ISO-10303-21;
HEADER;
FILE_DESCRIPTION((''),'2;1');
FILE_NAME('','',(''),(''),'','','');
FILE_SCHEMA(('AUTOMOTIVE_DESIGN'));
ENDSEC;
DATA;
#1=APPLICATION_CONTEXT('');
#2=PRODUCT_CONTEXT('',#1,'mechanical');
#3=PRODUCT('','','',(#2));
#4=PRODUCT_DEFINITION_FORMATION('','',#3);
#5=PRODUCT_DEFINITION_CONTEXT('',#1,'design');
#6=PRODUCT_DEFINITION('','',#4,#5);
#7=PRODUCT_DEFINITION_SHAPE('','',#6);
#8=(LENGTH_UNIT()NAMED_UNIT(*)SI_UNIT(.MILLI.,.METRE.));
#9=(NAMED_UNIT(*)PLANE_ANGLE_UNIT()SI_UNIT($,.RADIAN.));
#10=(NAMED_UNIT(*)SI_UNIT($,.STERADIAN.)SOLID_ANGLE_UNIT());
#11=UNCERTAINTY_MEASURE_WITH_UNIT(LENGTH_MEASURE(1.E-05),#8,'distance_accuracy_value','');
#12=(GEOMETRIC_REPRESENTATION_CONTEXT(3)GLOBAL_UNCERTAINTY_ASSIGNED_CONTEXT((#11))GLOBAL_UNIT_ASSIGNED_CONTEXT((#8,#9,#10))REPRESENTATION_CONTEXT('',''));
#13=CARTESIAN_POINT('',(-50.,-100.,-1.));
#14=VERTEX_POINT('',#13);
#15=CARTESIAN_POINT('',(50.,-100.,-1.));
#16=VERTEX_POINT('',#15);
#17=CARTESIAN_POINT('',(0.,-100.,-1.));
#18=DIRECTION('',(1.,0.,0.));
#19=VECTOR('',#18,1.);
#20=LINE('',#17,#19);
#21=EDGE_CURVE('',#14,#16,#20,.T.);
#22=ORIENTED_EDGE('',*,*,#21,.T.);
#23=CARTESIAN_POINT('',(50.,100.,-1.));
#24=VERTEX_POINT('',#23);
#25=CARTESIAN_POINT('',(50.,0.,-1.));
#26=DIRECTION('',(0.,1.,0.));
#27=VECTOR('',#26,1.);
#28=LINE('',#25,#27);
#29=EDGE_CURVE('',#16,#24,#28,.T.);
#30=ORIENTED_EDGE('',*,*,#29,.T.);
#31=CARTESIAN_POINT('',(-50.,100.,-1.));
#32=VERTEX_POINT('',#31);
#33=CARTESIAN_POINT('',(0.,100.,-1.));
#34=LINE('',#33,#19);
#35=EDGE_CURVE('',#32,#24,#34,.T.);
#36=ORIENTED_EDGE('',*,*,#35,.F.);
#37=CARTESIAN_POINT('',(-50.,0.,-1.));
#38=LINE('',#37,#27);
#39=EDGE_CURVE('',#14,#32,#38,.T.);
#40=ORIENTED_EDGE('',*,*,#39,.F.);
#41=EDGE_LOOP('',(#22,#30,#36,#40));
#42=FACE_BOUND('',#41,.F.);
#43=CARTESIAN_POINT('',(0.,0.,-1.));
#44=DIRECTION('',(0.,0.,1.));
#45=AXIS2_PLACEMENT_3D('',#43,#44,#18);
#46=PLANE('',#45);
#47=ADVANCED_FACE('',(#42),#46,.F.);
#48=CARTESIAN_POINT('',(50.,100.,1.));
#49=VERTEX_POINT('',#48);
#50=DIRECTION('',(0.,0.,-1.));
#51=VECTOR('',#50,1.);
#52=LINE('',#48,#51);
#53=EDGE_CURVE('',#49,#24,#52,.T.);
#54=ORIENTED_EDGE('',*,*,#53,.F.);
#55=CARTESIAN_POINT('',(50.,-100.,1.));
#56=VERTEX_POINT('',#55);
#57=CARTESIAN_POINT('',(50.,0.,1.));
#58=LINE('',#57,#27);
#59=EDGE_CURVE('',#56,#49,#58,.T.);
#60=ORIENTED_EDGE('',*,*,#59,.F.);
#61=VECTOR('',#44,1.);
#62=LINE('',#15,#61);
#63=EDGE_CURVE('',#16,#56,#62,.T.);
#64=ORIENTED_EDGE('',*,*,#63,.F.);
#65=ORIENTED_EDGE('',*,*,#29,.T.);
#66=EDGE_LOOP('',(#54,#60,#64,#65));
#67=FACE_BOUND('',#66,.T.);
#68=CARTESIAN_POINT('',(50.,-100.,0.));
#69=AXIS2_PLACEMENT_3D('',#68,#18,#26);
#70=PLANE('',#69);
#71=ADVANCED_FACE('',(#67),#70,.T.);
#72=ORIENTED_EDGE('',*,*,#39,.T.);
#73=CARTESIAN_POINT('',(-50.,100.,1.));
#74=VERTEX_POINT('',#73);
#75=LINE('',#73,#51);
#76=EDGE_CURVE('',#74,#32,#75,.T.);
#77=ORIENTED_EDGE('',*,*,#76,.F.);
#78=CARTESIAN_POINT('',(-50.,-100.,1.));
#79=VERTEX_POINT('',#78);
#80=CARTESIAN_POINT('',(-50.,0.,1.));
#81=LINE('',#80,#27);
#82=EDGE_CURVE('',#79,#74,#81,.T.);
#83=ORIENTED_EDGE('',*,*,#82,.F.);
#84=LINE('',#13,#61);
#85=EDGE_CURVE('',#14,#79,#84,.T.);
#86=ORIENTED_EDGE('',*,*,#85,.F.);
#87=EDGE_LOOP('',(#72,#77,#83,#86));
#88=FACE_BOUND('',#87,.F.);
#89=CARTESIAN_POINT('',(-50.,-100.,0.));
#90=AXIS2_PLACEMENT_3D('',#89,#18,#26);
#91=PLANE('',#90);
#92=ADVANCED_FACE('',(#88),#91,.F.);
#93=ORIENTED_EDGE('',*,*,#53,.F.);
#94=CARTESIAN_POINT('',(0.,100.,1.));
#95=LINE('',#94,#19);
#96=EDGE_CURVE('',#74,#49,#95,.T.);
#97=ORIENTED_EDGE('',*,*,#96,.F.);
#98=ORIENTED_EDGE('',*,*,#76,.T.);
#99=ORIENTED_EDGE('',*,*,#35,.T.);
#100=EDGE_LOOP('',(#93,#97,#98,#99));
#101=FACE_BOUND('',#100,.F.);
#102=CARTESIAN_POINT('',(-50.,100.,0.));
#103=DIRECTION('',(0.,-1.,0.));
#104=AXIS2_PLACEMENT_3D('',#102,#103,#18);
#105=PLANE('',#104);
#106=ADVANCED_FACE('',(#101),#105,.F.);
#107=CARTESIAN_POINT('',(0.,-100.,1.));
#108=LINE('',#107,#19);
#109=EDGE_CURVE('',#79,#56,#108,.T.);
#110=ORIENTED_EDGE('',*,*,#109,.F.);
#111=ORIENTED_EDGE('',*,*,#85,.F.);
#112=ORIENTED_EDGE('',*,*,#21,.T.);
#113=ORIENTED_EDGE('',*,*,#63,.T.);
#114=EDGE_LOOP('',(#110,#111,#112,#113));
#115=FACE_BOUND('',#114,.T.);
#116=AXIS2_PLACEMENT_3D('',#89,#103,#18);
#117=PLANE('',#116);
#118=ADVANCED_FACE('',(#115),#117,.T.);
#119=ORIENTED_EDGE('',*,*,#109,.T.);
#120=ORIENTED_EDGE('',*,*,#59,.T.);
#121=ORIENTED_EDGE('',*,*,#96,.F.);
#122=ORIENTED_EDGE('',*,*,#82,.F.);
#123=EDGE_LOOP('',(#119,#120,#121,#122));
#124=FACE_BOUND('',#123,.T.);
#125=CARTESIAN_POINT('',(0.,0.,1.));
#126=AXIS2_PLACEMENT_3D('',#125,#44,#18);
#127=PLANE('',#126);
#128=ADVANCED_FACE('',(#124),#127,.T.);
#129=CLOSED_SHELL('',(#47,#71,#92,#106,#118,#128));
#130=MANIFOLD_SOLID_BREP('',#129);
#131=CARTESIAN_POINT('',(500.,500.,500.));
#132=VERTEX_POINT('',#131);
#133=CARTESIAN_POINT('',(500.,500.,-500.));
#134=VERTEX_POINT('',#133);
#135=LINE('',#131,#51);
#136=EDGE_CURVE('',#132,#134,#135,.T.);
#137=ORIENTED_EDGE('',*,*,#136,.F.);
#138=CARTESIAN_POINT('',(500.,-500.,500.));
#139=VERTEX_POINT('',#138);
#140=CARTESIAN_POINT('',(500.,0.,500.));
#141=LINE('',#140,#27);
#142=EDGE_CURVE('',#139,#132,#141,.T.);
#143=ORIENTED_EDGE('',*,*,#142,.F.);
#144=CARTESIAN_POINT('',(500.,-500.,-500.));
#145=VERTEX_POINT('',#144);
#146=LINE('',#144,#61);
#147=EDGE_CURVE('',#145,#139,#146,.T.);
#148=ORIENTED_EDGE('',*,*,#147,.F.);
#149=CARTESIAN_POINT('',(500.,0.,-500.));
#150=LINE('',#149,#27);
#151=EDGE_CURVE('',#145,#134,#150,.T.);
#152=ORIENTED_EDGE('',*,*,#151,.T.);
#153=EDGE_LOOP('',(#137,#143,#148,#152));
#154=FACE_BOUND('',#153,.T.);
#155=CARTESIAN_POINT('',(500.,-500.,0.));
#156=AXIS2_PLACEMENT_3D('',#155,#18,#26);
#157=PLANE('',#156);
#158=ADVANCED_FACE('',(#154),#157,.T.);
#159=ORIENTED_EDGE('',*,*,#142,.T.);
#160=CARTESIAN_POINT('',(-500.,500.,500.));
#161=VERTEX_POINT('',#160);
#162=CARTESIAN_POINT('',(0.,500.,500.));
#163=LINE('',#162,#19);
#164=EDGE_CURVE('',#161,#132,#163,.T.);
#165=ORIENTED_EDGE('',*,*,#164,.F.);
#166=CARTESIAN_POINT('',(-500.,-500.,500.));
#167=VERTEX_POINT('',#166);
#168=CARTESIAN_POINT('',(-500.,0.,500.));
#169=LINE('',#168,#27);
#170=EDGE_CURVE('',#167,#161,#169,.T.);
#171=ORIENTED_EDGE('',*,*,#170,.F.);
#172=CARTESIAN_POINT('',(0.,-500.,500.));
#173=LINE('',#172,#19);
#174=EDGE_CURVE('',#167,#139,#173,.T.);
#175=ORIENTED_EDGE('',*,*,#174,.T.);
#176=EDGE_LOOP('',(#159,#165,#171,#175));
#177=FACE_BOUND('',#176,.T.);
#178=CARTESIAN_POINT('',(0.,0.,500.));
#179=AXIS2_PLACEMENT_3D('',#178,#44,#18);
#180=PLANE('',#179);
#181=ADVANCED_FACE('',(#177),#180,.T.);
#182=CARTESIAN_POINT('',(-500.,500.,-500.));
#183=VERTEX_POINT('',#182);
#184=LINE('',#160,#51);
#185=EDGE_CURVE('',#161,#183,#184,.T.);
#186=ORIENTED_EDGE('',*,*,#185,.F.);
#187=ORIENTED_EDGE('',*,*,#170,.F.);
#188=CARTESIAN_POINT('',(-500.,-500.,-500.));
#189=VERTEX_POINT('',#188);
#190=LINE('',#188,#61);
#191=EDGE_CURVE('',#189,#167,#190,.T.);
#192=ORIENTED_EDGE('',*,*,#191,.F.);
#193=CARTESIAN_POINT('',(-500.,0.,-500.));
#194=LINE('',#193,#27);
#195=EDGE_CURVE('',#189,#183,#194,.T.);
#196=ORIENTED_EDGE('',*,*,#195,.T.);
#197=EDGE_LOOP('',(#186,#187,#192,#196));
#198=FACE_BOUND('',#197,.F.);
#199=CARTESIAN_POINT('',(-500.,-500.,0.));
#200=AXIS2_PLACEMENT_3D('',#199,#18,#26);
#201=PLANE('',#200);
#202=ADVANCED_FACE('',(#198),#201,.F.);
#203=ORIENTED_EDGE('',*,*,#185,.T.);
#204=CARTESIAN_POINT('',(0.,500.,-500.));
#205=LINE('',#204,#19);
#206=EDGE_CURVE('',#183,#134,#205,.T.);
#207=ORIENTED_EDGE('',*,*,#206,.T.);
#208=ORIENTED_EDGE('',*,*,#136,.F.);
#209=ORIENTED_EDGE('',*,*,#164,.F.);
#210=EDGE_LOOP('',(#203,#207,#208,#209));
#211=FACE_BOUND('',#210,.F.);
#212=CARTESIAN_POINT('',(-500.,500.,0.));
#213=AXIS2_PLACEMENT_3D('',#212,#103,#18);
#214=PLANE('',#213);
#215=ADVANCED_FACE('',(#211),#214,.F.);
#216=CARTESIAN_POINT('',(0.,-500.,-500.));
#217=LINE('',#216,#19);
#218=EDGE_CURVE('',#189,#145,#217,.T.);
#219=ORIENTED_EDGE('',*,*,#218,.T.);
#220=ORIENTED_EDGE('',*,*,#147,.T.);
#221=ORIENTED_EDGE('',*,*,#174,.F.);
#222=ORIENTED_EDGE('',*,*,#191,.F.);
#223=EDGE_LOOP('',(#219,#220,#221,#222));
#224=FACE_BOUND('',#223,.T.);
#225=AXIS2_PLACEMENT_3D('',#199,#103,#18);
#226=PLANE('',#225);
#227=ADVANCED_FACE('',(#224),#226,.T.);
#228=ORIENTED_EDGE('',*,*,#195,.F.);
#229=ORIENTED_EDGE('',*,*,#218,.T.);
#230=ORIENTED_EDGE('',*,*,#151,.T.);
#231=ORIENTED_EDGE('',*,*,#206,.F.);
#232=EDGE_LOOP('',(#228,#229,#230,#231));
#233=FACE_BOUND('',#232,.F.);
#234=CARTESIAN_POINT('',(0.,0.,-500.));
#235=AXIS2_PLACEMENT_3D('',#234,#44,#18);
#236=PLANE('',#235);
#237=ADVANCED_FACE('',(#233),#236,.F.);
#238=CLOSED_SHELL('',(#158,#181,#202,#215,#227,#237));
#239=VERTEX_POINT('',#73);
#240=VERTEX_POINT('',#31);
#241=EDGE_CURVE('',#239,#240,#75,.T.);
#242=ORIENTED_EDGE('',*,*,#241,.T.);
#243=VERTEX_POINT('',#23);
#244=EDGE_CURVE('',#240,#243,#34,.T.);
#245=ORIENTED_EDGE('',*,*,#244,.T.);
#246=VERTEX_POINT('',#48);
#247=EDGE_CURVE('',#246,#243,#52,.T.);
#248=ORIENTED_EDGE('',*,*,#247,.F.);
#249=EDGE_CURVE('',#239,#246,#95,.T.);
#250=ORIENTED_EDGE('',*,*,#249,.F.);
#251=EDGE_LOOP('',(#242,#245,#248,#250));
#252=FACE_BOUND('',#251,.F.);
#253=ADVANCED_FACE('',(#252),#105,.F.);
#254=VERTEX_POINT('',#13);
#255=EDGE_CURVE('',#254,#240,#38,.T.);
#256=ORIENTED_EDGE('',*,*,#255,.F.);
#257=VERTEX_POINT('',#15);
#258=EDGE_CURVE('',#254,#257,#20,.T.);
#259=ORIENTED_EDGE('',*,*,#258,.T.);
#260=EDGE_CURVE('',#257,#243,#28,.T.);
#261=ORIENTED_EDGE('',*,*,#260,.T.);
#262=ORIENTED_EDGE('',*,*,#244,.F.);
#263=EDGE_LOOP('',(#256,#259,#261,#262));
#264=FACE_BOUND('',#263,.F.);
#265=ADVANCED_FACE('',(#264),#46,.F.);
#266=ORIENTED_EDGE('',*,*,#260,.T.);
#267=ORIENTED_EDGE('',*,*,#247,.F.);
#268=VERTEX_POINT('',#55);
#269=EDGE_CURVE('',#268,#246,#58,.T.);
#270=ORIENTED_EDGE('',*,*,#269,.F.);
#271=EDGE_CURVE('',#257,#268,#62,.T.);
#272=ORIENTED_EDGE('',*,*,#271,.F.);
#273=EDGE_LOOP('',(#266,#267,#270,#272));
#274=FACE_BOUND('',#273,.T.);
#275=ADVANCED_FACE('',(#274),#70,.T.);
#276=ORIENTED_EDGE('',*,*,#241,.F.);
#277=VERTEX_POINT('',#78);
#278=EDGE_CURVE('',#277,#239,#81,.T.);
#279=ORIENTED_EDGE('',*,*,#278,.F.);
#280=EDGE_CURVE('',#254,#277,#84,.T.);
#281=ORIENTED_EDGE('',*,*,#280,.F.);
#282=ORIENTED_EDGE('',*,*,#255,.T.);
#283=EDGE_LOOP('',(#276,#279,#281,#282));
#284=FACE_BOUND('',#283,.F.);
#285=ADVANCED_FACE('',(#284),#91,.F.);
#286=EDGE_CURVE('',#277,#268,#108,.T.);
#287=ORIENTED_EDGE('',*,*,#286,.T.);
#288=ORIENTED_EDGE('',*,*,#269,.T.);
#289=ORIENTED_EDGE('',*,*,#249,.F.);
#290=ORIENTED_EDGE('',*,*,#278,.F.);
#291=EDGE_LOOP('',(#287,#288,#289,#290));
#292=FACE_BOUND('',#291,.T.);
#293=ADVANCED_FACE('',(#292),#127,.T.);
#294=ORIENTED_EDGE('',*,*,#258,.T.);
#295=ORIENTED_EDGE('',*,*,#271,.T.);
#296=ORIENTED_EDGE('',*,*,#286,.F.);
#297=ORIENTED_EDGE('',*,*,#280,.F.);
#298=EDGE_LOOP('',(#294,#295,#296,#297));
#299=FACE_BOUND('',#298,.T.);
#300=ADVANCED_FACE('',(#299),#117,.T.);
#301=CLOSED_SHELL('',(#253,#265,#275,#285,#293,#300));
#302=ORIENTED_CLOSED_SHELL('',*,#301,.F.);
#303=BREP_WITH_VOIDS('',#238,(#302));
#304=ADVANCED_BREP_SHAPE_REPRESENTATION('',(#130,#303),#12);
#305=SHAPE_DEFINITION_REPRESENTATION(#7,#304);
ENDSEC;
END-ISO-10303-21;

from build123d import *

# Parameters (mm, degrees)
F0_W          = 100
F0_H          = 200
F1_DEPTH      = 1
F1_DEPTH_BACK = 1
F2_W          = 1000
F2_H          = 1000
F3_DEPTH      = 500
F3_DEPTH_BACK = 500


# Not quite as in the source:
# - a feature names something its author has since deleted; it is built from what else it names


with BuildPart() as f1:
    # F0 (on Top) → F1 (new body, two sides)
    with BuildSketch(Plane.XY) as f1_sk:
        Rectangle(F0_W, F0_H)
    extrude(amount=F1_DEPTH)
    extrude(f1_sk.sketch, amount=-F1_DEPTH_BACK)


with BuildPart() as f3:
    # F2 (on Top) → F3 (new body, two sides)
    with BuildSketch(Plane.XY) as f3_sk:
        Rectangle(F2_W, F2_H)
    extrude(amount=F3_DEPTH)
    extrude(f3_sk.sketch, amount=-F3_DEPTH_BACK)

    # F4: cut F1
    add(f1.part, mode=Mode.SUBTRACT)


solid = Compound([f1.part, f3.part])
